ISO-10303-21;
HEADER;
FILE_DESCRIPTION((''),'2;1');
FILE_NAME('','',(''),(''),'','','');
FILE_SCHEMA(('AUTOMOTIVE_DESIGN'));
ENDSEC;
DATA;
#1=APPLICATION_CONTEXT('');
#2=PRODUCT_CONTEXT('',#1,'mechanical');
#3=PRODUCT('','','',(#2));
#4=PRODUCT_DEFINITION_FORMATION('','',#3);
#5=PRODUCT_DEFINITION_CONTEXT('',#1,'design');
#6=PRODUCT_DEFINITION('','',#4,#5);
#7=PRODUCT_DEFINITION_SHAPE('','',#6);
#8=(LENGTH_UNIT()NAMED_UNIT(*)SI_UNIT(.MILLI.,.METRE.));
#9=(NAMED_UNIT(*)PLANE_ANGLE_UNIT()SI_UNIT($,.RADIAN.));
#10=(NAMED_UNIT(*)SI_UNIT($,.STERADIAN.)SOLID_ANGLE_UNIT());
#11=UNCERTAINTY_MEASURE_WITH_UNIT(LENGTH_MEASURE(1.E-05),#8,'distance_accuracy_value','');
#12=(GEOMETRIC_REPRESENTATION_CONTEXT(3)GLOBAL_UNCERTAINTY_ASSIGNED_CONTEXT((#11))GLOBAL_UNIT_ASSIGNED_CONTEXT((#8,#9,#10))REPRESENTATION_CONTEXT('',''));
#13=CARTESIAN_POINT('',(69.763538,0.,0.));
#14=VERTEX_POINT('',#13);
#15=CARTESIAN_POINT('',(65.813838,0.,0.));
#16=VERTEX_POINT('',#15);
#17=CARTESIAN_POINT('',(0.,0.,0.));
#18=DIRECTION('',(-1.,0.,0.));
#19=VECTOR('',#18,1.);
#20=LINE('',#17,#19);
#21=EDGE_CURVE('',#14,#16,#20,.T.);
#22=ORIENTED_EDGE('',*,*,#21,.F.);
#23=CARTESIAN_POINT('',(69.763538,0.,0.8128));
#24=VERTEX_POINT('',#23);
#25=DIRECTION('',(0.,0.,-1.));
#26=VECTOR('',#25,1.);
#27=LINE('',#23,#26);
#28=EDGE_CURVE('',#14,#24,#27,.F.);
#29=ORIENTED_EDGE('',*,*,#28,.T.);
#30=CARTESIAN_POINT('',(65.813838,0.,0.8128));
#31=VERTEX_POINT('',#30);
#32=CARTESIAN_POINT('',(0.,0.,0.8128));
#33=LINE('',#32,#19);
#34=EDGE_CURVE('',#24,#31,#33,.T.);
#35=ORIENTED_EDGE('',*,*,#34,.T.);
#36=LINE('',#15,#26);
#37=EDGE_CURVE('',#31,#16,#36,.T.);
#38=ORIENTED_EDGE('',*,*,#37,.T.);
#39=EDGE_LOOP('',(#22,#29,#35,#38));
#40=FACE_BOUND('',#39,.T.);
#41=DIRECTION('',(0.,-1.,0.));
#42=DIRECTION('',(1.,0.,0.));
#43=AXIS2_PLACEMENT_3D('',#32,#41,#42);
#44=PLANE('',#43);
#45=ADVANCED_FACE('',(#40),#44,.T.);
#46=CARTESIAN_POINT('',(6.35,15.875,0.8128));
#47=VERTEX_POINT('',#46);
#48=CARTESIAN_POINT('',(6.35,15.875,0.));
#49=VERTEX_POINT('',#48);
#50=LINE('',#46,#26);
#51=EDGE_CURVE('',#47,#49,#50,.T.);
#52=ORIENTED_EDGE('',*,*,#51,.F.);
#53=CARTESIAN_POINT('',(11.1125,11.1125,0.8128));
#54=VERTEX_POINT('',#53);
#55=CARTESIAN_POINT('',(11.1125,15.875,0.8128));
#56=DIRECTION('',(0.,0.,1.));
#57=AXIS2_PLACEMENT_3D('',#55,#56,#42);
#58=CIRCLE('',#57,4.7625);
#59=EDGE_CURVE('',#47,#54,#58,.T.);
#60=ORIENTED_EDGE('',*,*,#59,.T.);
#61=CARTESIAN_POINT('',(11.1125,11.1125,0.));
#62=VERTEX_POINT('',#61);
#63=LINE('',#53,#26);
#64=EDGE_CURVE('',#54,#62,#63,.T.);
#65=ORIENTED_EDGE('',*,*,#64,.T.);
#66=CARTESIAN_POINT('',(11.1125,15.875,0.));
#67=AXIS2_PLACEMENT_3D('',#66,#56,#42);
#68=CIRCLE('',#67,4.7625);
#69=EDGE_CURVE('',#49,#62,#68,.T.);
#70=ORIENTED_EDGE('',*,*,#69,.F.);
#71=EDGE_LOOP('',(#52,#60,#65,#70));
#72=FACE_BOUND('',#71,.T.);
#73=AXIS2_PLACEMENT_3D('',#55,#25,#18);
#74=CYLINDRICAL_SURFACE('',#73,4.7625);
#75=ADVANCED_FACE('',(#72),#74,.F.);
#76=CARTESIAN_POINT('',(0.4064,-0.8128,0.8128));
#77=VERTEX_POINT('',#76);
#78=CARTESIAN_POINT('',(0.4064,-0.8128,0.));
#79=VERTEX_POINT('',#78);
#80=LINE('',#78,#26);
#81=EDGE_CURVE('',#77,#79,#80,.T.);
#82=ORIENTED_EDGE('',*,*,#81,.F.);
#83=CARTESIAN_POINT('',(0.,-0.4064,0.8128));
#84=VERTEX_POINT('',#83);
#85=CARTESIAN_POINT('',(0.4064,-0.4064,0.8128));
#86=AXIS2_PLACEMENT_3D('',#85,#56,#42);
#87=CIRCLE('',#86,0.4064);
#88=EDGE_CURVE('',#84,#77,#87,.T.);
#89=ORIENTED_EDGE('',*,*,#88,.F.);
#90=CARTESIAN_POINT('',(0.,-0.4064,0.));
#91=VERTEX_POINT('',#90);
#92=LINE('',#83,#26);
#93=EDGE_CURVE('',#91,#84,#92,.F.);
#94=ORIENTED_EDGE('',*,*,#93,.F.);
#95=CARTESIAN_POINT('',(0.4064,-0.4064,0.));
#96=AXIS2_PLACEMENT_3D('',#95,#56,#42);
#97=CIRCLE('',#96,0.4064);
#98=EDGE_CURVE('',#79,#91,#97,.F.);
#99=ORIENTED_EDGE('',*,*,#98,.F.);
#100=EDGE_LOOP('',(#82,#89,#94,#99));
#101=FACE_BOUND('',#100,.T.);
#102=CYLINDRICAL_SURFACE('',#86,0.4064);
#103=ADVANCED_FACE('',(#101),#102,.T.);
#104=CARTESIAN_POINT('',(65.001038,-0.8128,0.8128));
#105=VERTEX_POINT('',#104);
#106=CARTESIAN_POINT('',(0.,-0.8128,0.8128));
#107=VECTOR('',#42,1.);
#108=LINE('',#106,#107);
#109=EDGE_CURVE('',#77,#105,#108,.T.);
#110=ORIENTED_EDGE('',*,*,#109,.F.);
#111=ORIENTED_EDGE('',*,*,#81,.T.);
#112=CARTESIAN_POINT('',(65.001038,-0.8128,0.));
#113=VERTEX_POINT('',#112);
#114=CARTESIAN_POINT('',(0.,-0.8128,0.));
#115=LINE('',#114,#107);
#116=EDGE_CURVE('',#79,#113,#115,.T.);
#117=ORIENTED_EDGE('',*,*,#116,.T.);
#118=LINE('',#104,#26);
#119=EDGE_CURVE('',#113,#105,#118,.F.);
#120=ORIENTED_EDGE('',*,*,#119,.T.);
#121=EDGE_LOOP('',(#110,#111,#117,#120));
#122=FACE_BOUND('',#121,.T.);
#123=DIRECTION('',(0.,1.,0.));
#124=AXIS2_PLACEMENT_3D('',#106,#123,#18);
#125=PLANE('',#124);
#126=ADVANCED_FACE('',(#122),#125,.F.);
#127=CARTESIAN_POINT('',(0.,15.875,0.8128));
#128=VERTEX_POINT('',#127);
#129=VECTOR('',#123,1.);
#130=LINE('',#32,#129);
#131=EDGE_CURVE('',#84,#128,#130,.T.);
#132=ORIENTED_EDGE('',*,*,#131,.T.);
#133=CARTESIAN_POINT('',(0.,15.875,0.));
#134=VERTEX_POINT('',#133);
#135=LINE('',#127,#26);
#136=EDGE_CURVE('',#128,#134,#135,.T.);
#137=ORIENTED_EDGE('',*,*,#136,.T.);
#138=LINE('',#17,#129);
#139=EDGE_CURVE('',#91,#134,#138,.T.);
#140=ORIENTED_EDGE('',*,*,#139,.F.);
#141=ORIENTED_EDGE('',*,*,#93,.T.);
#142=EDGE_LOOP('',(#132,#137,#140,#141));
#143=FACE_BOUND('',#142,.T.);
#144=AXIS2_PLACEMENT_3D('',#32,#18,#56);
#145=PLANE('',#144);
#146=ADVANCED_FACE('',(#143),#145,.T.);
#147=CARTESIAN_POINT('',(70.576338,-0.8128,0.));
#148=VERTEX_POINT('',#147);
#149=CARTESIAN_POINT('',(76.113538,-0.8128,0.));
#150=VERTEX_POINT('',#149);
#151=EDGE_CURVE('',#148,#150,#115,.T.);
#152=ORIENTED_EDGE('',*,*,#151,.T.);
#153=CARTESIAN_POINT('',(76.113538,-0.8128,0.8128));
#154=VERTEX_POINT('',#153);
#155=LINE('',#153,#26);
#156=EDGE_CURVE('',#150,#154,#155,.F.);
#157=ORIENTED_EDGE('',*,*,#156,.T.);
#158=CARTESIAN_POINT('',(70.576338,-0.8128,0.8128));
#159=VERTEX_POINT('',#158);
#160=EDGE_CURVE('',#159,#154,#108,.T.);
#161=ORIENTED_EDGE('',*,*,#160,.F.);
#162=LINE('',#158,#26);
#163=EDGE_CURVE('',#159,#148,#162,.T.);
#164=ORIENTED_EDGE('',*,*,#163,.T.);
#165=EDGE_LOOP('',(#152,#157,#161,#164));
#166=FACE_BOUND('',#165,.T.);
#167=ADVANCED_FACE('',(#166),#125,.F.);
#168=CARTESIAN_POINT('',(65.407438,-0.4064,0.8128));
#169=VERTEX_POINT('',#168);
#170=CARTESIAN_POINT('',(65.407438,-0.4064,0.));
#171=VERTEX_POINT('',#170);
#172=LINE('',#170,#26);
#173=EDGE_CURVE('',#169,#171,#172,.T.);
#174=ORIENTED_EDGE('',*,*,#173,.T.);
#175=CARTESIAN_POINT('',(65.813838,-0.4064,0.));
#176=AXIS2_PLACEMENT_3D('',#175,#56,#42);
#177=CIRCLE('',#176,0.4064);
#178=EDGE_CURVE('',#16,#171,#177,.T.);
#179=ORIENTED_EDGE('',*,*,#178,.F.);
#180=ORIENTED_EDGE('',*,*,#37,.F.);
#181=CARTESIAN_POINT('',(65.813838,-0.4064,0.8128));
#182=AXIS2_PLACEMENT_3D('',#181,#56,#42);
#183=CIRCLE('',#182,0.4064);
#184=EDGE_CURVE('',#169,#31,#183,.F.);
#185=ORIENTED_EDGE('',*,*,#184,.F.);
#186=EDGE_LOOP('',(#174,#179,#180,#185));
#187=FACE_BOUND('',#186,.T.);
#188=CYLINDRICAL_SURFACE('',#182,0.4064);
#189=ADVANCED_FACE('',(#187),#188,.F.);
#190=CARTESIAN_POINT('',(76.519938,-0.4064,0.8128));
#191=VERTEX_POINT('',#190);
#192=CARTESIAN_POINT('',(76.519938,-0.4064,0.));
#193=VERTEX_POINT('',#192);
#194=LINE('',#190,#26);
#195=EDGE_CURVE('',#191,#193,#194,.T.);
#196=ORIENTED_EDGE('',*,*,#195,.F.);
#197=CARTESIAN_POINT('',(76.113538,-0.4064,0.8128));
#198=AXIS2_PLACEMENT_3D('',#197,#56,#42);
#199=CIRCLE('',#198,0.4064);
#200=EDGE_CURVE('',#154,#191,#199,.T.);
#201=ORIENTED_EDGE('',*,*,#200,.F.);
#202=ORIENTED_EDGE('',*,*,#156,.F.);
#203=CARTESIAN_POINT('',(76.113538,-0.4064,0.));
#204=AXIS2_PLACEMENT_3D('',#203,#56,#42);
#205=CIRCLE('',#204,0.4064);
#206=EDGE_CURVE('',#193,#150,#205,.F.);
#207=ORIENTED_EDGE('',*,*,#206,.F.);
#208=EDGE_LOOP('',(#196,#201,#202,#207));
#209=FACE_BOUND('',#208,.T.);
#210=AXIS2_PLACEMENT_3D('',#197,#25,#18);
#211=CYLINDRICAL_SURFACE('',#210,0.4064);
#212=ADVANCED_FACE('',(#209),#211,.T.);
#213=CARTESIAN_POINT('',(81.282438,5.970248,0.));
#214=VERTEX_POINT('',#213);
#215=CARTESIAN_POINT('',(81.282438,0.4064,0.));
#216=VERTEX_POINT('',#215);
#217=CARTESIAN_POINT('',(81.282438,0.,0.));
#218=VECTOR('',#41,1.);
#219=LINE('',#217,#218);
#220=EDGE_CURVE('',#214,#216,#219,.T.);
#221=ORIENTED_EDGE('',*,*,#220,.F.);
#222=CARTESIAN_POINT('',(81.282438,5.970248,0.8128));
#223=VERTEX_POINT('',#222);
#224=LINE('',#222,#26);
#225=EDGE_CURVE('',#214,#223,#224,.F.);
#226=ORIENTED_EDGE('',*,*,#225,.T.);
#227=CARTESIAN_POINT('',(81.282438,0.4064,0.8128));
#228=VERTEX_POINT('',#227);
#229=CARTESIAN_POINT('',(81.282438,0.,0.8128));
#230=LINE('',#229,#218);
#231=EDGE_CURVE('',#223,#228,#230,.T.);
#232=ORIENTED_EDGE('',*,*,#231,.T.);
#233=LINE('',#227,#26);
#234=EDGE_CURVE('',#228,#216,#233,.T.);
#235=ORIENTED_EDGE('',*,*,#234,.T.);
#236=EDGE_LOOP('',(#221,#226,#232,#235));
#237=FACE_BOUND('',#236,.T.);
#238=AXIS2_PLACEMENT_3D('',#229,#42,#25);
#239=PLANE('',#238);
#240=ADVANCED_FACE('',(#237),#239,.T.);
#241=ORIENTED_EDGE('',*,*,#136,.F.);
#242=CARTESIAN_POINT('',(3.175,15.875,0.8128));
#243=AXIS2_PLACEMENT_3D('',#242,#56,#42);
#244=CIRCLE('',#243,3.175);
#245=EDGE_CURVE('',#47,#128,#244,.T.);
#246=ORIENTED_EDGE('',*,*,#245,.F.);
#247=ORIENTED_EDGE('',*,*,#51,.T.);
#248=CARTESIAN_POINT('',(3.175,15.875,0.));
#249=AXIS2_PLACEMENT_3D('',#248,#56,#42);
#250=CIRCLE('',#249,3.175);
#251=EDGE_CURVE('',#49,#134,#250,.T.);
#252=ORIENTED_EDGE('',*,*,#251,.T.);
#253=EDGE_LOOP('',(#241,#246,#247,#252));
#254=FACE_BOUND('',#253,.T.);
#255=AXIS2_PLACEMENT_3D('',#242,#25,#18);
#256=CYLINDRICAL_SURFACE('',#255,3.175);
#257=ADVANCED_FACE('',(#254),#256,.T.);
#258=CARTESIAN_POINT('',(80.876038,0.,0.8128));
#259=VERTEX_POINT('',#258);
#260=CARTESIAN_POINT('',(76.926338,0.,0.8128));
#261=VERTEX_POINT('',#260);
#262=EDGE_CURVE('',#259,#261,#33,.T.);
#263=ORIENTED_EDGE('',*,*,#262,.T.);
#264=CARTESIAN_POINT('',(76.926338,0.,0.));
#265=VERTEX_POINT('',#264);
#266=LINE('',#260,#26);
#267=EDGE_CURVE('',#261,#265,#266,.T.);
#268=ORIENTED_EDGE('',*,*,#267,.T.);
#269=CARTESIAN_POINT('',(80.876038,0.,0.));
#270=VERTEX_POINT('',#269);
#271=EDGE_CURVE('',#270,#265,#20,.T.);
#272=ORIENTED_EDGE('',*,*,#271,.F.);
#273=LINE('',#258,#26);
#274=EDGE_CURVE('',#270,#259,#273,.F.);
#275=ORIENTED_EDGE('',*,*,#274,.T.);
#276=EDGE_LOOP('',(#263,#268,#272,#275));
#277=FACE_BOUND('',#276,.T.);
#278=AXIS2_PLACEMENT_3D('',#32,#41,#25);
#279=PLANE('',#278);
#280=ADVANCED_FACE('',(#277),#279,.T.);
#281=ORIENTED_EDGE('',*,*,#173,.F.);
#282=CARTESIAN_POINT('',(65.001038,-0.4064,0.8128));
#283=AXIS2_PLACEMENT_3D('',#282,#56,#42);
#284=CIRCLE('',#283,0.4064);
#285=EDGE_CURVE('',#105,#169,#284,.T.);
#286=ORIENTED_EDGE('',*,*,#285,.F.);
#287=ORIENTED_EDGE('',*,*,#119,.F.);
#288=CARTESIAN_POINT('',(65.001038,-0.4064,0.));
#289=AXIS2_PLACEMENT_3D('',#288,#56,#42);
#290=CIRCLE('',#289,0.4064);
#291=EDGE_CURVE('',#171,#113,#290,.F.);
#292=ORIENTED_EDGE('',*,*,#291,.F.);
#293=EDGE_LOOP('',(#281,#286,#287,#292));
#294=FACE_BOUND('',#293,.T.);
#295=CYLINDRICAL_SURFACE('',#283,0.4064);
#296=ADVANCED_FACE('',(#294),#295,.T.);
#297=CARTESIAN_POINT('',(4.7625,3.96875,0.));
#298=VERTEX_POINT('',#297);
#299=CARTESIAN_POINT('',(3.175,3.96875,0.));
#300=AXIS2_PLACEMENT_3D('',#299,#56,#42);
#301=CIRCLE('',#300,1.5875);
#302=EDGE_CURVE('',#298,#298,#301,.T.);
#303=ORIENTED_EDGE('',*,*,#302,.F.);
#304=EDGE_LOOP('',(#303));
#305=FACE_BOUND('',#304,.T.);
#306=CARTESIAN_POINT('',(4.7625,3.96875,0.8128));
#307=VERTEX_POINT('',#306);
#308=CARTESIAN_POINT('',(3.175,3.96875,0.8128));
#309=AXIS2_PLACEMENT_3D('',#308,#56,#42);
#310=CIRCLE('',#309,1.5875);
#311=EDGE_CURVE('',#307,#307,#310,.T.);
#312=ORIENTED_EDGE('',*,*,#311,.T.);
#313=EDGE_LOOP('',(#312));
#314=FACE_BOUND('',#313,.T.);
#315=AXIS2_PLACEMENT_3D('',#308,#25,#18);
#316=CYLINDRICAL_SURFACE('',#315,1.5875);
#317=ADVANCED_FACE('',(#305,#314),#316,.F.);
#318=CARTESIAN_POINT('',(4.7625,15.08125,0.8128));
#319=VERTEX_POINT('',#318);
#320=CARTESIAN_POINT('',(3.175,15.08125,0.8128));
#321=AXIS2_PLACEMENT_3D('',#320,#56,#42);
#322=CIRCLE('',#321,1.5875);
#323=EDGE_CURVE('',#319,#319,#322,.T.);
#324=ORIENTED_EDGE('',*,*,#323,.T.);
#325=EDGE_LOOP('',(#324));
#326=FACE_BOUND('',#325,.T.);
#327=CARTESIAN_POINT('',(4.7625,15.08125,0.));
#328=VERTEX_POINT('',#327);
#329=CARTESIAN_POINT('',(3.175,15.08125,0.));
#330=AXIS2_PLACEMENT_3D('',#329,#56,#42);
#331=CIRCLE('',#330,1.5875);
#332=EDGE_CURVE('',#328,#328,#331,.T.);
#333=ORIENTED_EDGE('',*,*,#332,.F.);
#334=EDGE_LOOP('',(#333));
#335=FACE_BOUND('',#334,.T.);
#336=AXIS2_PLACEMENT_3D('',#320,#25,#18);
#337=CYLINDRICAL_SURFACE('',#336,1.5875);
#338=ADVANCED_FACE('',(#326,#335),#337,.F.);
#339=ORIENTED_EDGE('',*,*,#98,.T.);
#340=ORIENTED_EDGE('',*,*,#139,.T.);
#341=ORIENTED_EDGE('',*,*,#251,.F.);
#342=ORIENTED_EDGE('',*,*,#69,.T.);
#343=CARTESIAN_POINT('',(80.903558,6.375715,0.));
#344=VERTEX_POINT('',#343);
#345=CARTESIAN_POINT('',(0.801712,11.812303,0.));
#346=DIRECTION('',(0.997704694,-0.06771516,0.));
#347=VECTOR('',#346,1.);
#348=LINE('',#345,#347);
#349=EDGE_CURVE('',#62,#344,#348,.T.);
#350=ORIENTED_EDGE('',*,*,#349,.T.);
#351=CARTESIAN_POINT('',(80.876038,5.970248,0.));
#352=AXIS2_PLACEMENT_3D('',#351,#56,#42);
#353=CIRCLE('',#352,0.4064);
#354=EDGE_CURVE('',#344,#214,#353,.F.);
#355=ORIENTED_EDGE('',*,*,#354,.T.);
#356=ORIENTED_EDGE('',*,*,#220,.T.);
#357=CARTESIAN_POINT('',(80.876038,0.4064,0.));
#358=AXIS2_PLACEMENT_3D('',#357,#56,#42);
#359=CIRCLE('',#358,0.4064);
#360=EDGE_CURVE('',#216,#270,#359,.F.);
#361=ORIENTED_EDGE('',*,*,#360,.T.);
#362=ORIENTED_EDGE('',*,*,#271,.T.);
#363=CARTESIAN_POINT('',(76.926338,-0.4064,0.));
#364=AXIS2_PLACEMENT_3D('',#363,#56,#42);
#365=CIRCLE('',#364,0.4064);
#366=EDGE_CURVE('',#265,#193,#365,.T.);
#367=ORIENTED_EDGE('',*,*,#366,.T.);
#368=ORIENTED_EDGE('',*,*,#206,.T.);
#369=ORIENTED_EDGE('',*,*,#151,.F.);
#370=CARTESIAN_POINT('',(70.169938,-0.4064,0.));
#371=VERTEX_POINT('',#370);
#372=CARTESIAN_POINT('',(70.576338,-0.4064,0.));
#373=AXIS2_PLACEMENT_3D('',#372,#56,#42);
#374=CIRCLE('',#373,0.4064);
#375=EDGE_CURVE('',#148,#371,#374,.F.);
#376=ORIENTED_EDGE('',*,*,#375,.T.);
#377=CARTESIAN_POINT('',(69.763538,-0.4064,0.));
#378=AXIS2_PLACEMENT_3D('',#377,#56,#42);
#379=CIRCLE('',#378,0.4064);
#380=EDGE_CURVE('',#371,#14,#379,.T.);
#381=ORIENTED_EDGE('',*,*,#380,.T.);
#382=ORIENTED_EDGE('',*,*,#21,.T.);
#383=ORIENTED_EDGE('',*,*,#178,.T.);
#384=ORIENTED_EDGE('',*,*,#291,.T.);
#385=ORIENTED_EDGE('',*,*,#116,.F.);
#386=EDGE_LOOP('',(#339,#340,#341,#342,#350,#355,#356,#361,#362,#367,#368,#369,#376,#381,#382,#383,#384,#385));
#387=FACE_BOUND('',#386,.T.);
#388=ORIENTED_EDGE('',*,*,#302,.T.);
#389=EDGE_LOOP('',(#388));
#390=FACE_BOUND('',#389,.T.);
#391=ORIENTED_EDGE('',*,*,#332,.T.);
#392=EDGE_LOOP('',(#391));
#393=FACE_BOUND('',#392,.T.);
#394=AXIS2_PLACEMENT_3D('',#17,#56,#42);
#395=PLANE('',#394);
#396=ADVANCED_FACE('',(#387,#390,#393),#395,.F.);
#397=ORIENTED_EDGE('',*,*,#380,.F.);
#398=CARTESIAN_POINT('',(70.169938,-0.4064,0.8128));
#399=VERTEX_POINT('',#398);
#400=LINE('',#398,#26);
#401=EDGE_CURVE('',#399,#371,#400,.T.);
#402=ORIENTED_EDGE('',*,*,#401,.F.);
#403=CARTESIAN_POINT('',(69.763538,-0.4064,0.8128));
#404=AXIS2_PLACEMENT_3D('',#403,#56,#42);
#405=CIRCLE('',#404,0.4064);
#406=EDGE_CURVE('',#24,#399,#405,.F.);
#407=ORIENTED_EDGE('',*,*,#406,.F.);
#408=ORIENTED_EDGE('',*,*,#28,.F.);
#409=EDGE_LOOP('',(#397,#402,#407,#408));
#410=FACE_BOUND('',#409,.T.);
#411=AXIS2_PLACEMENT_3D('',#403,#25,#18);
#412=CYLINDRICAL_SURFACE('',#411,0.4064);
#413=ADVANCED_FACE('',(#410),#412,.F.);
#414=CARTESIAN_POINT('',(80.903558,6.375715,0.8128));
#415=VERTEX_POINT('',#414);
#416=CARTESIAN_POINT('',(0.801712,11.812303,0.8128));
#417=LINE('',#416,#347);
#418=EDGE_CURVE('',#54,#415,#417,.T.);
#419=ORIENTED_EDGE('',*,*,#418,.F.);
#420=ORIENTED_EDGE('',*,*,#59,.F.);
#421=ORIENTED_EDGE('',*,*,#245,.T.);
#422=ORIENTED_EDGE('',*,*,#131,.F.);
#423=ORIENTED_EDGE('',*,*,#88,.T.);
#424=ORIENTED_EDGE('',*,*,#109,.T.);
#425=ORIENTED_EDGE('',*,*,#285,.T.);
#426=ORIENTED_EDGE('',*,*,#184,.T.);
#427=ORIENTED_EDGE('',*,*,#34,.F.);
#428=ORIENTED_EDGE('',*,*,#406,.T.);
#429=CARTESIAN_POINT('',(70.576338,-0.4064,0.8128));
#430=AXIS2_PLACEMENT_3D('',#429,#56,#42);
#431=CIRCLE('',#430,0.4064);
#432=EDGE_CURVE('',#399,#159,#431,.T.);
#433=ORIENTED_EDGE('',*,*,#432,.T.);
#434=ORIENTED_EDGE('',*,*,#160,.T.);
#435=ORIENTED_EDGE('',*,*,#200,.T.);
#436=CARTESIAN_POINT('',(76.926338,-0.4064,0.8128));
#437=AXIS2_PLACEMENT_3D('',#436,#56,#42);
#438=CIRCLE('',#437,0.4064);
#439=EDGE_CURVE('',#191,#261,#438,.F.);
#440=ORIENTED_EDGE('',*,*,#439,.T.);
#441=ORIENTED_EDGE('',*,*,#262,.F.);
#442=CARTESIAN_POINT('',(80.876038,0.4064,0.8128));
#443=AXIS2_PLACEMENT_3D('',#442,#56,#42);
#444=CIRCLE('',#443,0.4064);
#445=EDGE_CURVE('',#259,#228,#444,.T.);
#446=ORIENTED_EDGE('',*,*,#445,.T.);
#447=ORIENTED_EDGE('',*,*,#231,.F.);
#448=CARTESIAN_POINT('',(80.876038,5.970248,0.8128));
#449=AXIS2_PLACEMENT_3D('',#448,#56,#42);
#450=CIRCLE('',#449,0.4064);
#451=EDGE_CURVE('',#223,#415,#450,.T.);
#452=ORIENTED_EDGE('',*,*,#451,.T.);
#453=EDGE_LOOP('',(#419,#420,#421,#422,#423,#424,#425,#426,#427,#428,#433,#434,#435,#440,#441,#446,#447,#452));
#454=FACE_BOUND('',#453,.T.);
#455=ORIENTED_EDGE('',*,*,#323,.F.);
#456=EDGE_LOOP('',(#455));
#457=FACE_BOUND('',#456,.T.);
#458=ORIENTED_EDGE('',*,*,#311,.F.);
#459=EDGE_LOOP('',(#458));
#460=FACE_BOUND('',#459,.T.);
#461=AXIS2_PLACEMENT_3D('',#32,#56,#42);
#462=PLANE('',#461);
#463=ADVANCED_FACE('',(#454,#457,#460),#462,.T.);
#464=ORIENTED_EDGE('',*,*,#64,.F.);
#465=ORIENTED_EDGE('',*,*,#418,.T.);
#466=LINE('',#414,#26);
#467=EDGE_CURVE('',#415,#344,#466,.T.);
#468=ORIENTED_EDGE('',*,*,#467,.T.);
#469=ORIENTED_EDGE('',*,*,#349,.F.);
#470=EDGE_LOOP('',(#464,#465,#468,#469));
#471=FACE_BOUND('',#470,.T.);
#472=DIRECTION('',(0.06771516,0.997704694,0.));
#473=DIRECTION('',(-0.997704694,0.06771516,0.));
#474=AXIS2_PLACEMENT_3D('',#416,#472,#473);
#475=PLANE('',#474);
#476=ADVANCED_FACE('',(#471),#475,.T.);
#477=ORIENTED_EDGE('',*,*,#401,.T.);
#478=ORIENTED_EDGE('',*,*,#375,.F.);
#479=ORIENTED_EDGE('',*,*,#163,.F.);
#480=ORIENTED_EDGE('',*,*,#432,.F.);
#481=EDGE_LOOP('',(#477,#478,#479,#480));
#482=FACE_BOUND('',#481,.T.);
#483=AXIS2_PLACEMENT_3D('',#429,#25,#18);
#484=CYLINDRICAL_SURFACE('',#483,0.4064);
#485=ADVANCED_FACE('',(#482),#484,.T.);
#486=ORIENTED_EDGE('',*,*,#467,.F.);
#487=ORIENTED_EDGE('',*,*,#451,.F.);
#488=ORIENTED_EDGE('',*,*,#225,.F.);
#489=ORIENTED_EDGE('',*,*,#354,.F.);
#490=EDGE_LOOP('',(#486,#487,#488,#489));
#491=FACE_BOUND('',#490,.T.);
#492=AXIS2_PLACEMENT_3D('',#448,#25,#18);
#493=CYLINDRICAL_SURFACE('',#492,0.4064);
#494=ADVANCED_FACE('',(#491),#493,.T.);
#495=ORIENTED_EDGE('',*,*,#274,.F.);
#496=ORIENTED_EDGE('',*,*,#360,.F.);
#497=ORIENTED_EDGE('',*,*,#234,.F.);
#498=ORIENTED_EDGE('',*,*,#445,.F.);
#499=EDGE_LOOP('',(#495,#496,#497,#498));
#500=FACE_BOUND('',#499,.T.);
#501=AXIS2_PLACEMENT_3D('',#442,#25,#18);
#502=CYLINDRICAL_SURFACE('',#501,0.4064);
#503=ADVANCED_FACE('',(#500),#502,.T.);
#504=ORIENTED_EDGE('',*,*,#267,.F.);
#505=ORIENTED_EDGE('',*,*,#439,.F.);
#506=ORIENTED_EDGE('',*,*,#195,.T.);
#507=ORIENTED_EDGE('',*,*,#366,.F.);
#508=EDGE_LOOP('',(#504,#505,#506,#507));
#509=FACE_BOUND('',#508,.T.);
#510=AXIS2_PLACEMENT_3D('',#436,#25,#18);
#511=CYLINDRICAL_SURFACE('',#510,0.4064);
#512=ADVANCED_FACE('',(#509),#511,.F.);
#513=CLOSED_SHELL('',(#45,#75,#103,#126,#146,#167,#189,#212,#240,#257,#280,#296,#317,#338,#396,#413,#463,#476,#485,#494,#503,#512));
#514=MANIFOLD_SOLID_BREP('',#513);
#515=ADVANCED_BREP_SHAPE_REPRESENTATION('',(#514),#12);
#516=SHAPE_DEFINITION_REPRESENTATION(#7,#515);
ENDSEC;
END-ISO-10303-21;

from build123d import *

# Parameters (mm, degrees)
SKETCH1_R           = 1.5875
BOSS_EXTRUDE1_DEPTH = 0.8128
FILLET1_R           = 0.4064


with BuildPart() as part:
    # Sketch1 → Boss-Extrude1 (new body)
    with BuildSketch(Plane.XY):
        with BuildLine():
            Line((0, -0.8128), (65.4074384, -0.8128))
            Line((65.4074384, -0.8128), (65.4074384, 0))
            Line((65.4074384, 0), (70.1699384, 0))
            Line((70.1699384, 0), (70.1699384, -0.8128))
            Line((70.1699384, -0.8128), (76.5199384, -0.8128))
            Line((76.5199384, -0.8128), (76.5199384, 0))
            Line((76.5199384, 0), (81.2824384, 0))
            Line((81.2824384, 0), (81.2824384, 6.35))
            Line((81.2824384, 6.35), (11.1125, 11.1125))
            ThreePointArc((11.1125, 11.1125), (7.744903955, 12.507403955), (6.35, 15.875))
            ThreePointArc((6.35, 15.875), (3.175, 19.05), (0, 15.875))
            Line((0, 15.875), (0, -0.8128))
        make_face()
        with Locations((3.175, 3.96875)):
            Circle(SKETCH1_R, mode=Mode.SUBTRACT)
        with Locations((3.175, 15.08125)):
            Circle(SKETCH1_R, mode=Mode.SUBTRACT)
    extrude(amount=BOSS_EXTRUDE1_DEPTH)

    # Fillet1
    fillet1_edges = [part.edges().sort_by_distance(p)[0] for p in [
        (81.2824384, 6.35, 0.4064),
        (81.2824384, 0, 0.4064),
        (76.5199384, 0, 0.4064),
        (76.5199384, -0.8128, 0.4064),
        (70.1699384, -0.8128, 0.4064),
        (70.1699384, 0, 0.4064),
        (65.4074384, 0, 0.4064),
        (65.4074384, -0.8128, 0.4064),
        (0, -0.8128, 0.4064),
    ]]
    fillet(fillet1_edges, radius=FILLET1_R - 0.0001)  # a hair under: the kernel refuses the full size


solid = part.part
